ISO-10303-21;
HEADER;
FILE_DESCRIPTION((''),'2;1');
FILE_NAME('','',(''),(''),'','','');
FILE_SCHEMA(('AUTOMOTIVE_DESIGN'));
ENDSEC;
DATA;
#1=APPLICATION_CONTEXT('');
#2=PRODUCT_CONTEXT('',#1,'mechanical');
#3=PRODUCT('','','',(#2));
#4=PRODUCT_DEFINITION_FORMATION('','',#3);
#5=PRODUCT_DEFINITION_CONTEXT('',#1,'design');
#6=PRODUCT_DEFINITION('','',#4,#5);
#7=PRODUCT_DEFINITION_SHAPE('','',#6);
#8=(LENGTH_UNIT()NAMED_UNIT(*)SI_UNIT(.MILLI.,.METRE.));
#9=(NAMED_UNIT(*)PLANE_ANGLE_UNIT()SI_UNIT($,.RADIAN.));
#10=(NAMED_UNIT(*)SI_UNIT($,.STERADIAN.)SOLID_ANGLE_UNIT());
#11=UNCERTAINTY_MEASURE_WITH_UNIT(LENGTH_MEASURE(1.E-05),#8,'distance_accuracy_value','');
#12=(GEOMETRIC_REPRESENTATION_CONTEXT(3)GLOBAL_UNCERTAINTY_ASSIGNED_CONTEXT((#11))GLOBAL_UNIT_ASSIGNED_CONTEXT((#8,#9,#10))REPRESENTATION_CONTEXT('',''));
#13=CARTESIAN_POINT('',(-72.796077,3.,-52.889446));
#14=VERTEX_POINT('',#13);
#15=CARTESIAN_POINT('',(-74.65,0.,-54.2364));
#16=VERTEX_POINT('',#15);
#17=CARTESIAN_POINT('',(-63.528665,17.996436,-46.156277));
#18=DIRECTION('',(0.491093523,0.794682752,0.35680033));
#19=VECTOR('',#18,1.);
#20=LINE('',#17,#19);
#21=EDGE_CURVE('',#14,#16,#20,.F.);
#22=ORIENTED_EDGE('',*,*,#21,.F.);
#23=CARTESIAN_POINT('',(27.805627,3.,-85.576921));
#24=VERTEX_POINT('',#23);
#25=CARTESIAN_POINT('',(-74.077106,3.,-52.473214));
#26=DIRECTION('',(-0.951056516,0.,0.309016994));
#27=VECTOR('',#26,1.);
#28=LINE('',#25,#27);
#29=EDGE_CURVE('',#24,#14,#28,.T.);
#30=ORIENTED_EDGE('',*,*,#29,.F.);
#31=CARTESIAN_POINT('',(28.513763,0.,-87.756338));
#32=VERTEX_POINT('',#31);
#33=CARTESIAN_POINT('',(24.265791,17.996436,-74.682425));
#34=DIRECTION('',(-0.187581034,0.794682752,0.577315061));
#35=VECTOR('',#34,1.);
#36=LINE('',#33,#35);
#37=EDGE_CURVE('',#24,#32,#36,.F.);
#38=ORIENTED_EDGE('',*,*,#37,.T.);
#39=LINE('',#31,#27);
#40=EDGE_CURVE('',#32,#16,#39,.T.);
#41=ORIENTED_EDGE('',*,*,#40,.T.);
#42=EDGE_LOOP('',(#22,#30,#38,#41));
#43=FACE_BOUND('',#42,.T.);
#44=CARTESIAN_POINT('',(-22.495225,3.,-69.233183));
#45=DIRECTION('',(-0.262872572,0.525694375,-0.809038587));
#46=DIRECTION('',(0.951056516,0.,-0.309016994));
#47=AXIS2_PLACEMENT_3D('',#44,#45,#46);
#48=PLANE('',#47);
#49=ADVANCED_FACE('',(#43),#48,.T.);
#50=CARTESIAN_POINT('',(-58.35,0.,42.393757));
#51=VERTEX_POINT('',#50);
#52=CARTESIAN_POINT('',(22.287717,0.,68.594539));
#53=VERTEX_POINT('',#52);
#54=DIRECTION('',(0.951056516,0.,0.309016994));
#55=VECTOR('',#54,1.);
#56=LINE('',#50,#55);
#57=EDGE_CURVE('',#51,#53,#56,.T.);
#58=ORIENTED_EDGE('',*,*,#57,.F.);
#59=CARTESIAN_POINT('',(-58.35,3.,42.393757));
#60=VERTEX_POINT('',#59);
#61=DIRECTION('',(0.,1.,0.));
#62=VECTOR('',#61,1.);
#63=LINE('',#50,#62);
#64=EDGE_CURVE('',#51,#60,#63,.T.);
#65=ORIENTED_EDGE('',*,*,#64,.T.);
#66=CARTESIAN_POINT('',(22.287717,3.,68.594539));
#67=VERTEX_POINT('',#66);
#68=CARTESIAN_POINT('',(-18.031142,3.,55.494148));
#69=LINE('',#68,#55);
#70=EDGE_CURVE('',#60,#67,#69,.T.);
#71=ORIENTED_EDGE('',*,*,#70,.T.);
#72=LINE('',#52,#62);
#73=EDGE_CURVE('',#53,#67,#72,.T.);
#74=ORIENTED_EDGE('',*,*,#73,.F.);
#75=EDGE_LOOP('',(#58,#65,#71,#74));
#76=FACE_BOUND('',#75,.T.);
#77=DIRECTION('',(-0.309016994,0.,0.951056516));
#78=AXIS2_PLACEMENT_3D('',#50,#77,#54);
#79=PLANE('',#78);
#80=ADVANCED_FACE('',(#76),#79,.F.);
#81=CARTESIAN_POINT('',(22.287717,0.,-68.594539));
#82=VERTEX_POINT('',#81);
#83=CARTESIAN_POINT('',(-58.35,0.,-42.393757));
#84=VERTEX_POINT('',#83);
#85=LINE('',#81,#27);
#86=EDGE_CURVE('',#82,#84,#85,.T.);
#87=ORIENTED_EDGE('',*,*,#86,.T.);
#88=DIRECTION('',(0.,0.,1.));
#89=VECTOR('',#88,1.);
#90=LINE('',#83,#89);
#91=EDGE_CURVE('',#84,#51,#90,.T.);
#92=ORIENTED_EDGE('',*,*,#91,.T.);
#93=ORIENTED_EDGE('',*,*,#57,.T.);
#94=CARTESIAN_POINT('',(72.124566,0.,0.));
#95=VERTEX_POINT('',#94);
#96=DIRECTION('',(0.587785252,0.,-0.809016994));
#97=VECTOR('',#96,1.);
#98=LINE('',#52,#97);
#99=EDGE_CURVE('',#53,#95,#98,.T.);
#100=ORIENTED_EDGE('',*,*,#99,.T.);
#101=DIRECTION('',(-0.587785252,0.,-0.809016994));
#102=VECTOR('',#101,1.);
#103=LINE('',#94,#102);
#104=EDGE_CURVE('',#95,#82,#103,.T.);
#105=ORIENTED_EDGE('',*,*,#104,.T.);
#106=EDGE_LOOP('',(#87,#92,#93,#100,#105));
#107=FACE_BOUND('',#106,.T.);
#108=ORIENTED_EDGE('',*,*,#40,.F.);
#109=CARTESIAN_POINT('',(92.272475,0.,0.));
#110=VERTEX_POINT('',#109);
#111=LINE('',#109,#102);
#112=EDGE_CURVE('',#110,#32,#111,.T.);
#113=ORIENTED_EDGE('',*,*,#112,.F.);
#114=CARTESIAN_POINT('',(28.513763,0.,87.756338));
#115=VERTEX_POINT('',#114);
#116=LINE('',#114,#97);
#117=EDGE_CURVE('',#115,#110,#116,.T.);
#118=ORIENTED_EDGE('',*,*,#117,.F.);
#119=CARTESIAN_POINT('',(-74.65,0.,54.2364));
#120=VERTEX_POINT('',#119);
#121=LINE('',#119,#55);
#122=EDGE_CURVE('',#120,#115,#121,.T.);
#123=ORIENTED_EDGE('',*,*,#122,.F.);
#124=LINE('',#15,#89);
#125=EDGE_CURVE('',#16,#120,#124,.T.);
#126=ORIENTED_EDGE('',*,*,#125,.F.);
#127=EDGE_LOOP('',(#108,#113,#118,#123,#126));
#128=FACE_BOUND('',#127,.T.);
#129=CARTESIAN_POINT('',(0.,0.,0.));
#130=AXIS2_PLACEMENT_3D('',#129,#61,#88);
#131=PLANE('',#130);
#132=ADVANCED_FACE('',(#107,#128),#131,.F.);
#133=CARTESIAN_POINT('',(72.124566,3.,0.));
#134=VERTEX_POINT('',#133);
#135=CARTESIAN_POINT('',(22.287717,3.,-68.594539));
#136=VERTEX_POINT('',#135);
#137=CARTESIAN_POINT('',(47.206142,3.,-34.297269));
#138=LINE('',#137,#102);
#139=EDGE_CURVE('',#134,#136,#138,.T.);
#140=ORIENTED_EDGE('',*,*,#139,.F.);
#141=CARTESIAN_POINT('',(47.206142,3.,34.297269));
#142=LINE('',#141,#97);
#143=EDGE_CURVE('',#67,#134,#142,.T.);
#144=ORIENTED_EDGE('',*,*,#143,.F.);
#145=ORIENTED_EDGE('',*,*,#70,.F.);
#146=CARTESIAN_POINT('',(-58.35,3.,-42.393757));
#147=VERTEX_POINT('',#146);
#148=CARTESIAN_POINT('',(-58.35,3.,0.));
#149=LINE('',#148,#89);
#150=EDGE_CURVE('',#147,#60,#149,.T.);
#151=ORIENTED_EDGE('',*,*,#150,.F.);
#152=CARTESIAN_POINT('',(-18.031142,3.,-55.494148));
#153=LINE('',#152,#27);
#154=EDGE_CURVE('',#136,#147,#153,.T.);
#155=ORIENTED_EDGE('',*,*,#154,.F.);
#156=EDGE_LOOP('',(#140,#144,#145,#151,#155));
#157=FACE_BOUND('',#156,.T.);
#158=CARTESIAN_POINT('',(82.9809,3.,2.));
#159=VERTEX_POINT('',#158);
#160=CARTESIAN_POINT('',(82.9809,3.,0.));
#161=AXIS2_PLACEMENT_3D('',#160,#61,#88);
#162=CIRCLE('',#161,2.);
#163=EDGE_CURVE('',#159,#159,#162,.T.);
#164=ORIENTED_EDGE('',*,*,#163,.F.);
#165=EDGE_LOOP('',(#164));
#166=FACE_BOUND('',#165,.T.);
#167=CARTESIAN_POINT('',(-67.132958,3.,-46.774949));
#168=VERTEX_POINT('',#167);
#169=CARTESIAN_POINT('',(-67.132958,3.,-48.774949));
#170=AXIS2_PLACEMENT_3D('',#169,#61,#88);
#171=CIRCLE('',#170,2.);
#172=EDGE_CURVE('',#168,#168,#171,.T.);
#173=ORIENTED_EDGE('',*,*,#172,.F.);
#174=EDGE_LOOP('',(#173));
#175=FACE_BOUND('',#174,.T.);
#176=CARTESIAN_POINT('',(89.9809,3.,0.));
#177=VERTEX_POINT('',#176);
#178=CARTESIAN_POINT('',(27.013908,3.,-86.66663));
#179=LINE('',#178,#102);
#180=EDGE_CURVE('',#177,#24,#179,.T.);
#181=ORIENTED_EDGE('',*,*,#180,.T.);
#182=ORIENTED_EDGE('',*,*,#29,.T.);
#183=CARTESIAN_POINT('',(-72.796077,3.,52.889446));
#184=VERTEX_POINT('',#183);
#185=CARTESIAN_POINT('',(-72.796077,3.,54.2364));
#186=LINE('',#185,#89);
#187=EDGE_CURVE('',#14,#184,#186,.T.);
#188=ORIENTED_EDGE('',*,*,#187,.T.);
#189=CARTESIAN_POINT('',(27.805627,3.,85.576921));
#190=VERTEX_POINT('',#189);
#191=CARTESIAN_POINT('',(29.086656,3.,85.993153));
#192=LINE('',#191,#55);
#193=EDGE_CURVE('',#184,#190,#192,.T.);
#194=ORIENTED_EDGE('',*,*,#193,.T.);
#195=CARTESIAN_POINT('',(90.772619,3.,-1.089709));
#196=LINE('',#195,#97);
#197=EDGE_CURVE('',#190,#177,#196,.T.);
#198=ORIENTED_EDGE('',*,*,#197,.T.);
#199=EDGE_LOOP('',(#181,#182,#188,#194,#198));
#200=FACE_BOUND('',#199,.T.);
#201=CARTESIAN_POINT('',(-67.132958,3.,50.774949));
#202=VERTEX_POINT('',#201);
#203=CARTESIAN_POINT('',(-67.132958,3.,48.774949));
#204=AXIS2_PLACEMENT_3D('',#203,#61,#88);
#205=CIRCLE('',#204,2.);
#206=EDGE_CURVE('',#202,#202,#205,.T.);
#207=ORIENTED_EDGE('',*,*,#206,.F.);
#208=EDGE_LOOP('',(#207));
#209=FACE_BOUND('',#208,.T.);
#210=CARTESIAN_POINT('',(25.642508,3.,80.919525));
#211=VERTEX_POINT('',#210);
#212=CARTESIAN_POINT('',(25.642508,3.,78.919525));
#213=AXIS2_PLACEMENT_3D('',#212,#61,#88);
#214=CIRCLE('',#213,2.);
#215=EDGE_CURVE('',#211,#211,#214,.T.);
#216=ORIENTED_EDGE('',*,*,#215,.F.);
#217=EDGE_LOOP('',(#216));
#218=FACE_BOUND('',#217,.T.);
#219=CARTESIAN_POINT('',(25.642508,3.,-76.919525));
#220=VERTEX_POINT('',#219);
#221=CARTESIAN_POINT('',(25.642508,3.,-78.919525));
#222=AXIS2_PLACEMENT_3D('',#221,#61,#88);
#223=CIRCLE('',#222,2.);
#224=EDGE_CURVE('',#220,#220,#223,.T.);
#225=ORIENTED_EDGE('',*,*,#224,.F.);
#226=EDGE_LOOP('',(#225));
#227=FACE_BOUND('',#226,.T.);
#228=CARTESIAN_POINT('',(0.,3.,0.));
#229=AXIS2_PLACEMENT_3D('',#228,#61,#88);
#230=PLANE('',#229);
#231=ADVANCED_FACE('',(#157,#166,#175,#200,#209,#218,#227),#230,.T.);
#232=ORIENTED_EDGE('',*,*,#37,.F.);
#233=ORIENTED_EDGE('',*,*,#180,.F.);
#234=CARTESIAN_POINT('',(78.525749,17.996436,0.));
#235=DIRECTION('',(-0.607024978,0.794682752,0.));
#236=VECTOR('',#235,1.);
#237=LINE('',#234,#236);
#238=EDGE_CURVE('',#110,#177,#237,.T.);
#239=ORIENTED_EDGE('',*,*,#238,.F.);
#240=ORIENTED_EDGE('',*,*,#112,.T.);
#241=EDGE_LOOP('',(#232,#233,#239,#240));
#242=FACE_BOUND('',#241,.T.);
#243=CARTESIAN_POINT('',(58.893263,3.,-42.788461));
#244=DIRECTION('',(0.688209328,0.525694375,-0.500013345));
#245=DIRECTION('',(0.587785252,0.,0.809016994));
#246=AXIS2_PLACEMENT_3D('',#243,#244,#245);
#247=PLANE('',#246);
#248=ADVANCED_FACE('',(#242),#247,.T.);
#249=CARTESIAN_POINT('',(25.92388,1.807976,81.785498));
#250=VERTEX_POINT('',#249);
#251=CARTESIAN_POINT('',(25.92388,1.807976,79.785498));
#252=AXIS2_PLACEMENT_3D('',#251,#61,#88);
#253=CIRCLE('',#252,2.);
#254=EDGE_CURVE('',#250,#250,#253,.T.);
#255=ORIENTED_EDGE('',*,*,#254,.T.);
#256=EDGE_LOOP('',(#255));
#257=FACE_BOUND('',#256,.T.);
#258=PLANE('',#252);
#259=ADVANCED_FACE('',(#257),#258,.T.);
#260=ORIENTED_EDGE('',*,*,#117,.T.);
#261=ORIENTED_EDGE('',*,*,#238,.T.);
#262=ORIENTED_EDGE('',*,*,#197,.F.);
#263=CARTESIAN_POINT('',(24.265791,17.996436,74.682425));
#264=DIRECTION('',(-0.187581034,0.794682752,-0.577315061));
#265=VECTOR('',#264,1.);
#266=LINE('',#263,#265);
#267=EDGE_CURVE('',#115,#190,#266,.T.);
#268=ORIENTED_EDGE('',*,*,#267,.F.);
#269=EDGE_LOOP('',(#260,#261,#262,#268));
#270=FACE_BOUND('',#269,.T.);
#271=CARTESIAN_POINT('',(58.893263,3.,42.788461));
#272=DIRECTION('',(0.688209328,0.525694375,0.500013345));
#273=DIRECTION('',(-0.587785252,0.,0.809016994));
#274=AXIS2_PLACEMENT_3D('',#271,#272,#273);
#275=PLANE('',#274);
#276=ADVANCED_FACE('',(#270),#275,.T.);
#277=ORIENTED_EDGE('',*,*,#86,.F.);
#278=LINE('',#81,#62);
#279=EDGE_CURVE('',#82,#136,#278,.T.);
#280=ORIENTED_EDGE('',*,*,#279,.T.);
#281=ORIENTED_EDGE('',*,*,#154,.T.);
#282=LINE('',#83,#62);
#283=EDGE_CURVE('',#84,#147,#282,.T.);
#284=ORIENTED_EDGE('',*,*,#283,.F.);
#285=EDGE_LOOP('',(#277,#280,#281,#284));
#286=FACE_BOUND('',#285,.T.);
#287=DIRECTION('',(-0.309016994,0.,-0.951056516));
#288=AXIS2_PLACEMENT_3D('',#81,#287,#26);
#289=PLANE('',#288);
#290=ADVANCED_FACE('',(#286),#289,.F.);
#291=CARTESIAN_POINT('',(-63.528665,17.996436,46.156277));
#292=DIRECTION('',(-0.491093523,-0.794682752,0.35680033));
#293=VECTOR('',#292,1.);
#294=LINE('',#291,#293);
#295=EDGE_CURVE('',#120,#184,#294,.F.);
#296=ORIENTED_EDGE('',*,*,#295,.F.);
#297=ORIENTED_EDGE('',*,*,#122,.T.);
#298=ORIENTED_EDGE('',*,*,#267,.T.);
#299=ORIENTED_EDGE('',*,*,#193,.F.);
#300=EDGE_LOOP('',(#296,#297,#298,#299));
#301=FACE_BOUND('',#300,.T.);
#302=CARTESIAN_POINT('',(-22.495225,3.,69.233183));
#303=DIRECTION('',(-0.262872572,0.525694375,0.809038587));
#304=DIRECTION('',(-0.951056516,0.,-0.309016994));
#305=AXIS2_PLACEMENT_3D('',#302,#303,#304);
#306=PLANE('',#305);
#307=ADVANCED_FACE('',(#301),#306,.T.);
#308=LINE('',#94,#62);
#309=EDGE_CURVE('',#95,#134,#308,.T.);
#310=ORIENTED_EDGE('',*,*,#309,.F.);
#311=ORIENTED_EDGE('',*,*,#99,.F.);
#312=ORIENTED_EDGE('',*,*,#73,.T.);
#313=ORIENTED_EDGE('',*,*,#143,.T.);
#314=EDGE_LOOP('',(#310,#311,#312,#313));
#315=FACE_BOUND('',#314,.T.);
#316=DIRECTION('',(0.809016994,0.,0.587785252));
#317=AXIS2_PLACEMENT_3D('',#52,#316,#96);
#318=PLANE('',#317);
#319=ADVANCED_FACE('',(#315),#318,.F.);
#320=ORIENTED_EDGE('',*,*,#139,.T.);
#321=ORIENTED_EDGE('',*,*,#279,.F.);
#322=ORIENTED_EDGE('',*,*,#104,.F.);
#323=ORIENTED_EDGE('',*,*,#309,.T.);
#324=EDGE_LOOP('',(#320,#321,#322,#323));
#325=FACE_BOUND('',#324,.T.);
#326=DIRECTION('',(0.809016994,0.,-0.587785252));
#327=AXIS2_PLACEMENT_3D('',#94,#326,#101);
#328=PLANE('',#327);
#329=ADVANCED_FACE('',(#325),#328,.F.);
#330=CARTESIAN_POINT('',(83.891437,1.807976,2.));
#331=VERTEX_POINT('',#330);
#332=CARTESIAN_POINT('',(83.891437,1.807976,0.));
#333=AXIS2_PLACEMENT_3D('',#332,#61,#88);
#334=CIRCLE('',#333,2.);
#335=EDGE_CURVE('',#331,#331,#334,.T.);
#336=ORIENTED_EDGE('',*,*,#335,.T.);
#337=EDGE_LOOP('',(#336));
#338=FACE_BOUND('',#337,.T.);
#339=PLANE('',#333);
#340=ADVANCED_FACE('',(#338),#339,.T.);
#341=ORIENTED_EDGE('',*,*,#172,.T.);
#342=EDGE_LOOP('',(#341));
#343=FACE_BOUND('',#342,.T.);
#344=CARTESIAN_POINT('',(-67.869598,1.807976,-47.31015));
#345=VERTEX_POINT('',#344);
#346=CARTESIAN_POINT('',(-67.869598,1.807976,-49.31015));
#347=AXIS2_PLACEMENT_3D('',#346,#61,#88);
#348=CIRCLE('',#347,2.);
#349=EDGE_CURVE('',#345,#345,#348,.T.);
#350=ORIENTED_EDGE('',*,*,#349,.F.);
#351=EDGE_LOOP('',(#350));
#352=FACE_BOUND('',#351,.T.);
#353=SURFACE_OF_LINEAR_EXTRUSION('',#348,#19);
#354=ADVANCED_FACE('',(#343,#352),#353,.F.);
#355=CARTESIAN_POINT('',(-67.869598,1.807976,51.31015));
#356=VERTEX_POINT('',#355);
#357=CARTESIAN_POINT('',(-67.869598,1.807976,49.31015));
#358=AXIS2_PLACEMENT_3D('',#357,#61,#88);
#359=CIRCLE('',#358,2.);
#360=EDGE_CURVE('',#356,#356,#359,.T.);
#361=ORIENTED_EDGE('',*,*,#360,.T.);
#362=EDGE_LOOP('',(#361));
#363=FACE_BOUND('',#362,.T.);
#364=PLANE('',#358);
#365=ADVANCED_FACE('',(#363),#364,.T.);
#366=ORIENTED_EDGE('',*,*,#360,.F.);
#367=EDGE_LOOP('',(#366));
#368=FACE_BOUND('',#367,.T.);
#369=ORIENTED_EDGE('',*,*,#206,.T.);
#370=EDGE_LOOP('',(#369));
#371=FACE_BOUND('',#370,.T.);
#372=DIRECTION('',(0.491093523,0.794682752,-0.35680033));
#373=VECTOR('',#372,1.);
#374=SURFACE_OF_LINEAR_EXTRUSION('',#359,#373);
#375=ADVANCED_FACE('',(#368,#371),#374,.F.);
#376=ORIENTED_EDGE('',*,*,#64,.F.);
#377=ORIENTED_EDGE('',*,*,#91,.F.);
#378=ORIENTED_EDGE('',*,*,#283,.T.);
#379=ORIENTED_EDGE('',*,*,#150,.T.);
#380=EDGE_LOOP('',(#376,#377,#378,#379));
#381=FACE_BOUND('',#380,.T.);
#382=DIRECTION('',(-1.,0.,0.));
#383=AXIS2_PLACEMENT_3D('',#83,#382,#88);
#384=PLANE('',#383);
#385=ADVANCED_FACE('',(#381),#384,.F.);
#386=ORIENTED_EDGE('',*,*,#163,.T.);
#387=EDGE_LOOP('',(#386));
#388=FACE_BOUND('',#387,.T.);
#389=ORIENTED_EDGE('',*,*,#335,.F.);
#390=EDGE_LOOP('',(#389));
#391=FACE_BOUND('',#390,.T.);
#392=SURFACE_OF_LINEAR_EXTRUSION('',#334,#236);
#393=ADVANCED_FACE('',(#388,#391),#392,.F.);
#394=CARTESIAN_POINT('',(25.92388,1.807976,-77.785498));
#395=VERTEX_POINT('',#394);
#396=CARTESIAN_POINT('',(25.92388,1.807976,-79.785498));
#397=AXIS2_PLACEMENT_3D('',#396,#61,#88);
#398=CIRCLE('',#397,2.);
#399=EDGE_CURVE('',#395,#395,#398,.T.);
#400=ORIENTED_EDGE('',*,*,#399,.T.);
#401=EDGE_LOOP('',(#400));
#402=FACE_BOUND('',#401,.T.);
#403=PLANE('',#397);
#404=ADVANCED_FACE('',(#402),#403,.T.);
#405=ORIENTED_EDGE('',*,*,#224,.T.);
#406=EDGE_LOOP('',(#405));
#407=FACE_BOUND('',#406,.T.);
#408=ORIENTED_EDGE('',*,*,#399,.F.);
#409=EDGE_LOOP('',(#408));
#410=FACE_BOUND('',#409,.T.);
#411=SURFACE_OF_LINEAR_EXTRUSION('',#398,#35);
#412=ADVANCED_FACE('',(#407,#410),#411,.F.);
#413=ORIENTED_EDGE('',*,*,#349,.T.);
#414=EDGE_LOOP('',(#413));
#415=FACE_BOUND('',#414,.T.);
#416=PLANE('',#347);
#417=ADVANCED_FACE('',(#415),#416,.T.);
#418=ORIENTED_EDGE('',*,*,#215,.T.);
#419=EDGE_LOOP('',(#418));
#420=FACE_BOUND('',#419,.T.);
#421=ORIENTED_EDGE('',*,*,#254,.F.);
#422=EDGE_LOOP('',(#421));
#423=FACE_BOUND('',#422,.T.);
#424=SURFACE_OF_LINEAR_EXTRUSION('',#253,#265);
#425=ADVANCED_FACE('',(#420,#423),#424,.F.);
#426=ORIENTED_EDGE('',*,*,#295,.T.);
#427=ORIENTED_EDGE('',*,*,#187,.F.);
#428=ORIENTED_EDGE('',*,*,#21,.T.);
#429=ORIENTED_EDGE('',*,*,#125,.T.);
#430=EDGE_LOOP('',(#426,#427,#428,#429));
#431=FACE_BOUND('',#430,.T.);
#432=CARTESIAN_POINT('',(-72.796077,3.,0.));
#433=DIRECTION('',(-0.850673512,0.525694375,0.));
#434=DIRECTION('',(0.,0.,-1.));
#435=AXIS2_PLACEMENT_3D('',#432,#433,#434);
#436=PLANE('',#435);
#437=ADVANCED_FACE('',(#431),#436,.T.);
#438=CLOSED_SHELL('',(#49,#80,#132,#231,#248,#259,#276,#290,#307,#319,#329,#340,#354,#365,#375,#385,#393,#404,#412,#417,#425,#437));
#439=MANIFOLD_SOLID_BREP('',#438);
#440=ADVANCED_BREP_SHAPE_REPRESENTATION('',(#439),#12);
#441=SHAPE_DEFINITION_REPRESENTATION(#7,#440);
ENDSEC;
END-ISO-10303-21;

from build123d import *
from OCP.BRepFilletAPI import BRepFilletAPI_MakeChamfer

# Parameters (mm, degrees)
BOSS_EXTRUDE1_DEPTH = 3
CHAMFER1_SIZE       = 3
CHAMFER1_SIZE_2     = 1.853922924
CUT_EXTRUDE1_DEPTH  = 10
SKETCH2_R           = 2
CUT_EXTRUDE2_DEPTH  = 1.5
SKETCH5_R           = 2
CUT_EXTRUDE3_DEPTH  = 1.5
SKETCH9_R           = 2
CUT_EXTRUDE4_DEPTH  = 1.5
SKETCH10_R          = 2
CUT_EXTRUDE5_DEPTH  = 1.5
SKETCH11_R          = 2
CUT_EXTRUDE6_DEPTH  = 1.5


with BuildPart() as part:
    # Sketch1 → Boss-Extrude1 (new body)
    with BuildSketch(Plane(origin=(0, 0, 0), x_dir=(1, 0, 0), z_dir=(0, 1, 0))):
        Polygon((92.27247452, 0), (28.51376274, 87.756338167), (-74.65, 54.236399716), (-74.65, -54.236399716), (28.51376274, -87.756338167), align=None)
    extrude(amount=BOSS_EXTRUDE1_DEPTH)

    # Chamfer1
    chamfer1_edges_1 = [part.edges().sort_by_distance(p)[0] for p in [
        (-74.65, 3, 0),
    ]]
    chamfer1_side_1 = [part.faces().sort_by_distance(p)[0] for p in [
        (-74.65, 2.962921542, 0),
    ]]
    chamfer1_edges_2 = [part.edges().sort_by_distance(p)[0] for p in [
        (-23.06811863, 3, -70.996368941),
    ]]
    chamfer1_side_2 = [part.faces().sort_by_distance(p)[0] for p in [
        (-23.06811863, 2.962921542, -70.996368941),
    ]]
    chamfer1_edges_3 = [part.edges().sort_by_distance(p)[0] for p in [
        (60.39311863, 3, -43.878169084),
    ]]
    chamfer1_side_3 = [part.faces().sort_by_distance(p)[0] for p in [
        (60.39311863, 2.962921542, -43.878169084),
    ]]
    chamfer1_edges_4 = [part.edges().sort_by_distance(p)[0] for p in [
        (60.39311863, 3, 43.878169084),
    ]]
    chamfer1_side_4 = [part.faces().sort_by_distance(p)[0] for p in [
        (60.39311863, 2.962921542, 43.878169084),
    ]]
    chamfer1_edges_5 = [part.edges().sort_by_distance(p)[0] for p in [
        (-23.06811863, 3, 70.996368941),
    ]]
    chamfer1_side_5 = [part.faces().sort_by_distance(p)[0] for p in [
        (-23.06811863, 2.962921542, 70.996368941),
    ]]
    chamfer1 = BRepFilletAPI_MakeChamfer(part.part.solid().wrapped)
    for e in chamfer1_edges_1:
        chamfer1.Add(CHAMFER1_SIZE - 0.0001, CHAMFER1_SIZE_2 - 0.0001, e.wrapped, chamfer1_side_1[0].wrapped)
    for e in chamfer1_edges_2:
        chamfer1.Add(CHAMFER1_SIZE - 0.0001, CHAMFER1_SIZE_2 - 0.0001, e.wrapped, chamfer1_side_2[0].wrapped)
    for e in chamfer1_edges_3:
        chamfer1.Add(CHAMFER1_SIZE - 0.0001, CHAMFER1_SIZE_2 - 0.0001, e.wrapped, chamfer1_side_3[0].wrapped)
    for e in chamfer1_edges_4:
        chamfer1.Add(CHAMFER1_SIZE - 0.0001, CHAMFER1_SIZE_2 - 0.0001, e.wrapped, chamfer1_side_4[0].wrapped)
    for e in chamfer1_edges_5:
        chamfer1.Add(CHAMFER1_SIZE - 0.0001, CHAMFER1_SIZE_2 - 0.0001, e.wrapped, chamfer1_side_5[0].wrapped)
    add(Compound.cast(chamfer1.Shape()), mode=Mode.REPLACE)  # a hair under: the kernel refuses the full size

    # 3DSketch1 → Cut-Extrude1 (cut)
    with BuildSketch(Plane(origin=(-58.35, 0, -42.393756509), x_dir=(0.9510565162951536, 0, 0.3090169943749475), z_dir=(0, -1, 0))):
        Polygon((0, 0), (26.200782433, 80.637716756), (110.988295452, 80.637716756), (137.189077885, 0), (68.594538943, -49.836849731), align=None)
    extrude(amount=-CUT_EXTRUDE1_DEPTH, mode=Mode.SUBTRACT)

    # Sketch2 → Cut-Extrude2 (cut, along a direction that is not the sketch's normal)
    with BuildSketch(Plane(origin=(0, 3, 0), x_dir=(1, 0, 0), z_dir=(0, 1, 0))):
        with Locations((-67.132958116, 48.774949102)):
            Circle(SKETCH2_R)
    extrude(amount=-CUT_EXTRUDE2_DEPTH, dir=(0.4910935234360901, 0.7946827516361096, 0.3568003300043147), mode=Mode.SUBTRACT)

    # Sketch5 → Cut-Extrude3 (cut, along a direction that is not the sketch's normal)
    with BuildSketch(Plane(origin=(0, 3, 0), x_dir=(1, 0, 0), z_dir=(0, 1, 0))):
        with Locations((25.642508235, 78.919525446)):
            Circle(SKETCH5_R)
    extrude(amount=-CUT_EXTRUDE3_DEPTH, dir=(-0.1875810342976446, 0.7946827516361096, 0.577315061144162), mode=Mode.SUBTRACT)

    # Sketch9 → Cut-Extrude4 (cut, along a direction that is not the sketch's normal)
    with BuildSketch(Plane(origin=(0, 3, 0), x_dir=(1, 0, 0), z_dir=(0, 1, 0))):
        with Locations((82.980899762, 0)):
            Circle(SKETCH9_R)
    extrude(amount=-CUT_EXTRUDE4_DEPTH, dir=(-0.6070249782768915, 0.7946827516361101, 3.1127032543975076e-15), mode=Mode.SUBTRACT)

    # Sketch10 → Cut-Extrude5 (cut, along a direction that is not the sketch's normal)
    with BuildSketch(Plane(origin=(0, 3, 0), x_dir=(1, 0, 0), z_dir=(0, 1, 0))):
        with Locations((25.642508235, -78.919525446)):
            Circle(SKETCH10_R)
    extrude(amount=-CUT_EXTRUDE5_DEPTH, dir=(-0.18758103429764075, 0.7946827516361107, -0.5773150611441616), mode=Mode.SUBTRACT)

    # Sketch11 → Cut-Extrude6 (cut, along a direction that is not the sketch's normal)
    with BuildSketch(Plane(origin=(0, 3, 0), x_dir=(1, 0, 0), z_dir=(0, 1, 0))):
        with Locations((-67.132958116, -48.774949102)):
            Circle(SKETCH11_R)
    extrude(amount=-CUT_EXTRUDE6_DEPTH, dir=(0.49109352343609003, 0.7946827516361095, -0.35680033000431516), mode=Mode.SUBTRACT)


solid = part.part
